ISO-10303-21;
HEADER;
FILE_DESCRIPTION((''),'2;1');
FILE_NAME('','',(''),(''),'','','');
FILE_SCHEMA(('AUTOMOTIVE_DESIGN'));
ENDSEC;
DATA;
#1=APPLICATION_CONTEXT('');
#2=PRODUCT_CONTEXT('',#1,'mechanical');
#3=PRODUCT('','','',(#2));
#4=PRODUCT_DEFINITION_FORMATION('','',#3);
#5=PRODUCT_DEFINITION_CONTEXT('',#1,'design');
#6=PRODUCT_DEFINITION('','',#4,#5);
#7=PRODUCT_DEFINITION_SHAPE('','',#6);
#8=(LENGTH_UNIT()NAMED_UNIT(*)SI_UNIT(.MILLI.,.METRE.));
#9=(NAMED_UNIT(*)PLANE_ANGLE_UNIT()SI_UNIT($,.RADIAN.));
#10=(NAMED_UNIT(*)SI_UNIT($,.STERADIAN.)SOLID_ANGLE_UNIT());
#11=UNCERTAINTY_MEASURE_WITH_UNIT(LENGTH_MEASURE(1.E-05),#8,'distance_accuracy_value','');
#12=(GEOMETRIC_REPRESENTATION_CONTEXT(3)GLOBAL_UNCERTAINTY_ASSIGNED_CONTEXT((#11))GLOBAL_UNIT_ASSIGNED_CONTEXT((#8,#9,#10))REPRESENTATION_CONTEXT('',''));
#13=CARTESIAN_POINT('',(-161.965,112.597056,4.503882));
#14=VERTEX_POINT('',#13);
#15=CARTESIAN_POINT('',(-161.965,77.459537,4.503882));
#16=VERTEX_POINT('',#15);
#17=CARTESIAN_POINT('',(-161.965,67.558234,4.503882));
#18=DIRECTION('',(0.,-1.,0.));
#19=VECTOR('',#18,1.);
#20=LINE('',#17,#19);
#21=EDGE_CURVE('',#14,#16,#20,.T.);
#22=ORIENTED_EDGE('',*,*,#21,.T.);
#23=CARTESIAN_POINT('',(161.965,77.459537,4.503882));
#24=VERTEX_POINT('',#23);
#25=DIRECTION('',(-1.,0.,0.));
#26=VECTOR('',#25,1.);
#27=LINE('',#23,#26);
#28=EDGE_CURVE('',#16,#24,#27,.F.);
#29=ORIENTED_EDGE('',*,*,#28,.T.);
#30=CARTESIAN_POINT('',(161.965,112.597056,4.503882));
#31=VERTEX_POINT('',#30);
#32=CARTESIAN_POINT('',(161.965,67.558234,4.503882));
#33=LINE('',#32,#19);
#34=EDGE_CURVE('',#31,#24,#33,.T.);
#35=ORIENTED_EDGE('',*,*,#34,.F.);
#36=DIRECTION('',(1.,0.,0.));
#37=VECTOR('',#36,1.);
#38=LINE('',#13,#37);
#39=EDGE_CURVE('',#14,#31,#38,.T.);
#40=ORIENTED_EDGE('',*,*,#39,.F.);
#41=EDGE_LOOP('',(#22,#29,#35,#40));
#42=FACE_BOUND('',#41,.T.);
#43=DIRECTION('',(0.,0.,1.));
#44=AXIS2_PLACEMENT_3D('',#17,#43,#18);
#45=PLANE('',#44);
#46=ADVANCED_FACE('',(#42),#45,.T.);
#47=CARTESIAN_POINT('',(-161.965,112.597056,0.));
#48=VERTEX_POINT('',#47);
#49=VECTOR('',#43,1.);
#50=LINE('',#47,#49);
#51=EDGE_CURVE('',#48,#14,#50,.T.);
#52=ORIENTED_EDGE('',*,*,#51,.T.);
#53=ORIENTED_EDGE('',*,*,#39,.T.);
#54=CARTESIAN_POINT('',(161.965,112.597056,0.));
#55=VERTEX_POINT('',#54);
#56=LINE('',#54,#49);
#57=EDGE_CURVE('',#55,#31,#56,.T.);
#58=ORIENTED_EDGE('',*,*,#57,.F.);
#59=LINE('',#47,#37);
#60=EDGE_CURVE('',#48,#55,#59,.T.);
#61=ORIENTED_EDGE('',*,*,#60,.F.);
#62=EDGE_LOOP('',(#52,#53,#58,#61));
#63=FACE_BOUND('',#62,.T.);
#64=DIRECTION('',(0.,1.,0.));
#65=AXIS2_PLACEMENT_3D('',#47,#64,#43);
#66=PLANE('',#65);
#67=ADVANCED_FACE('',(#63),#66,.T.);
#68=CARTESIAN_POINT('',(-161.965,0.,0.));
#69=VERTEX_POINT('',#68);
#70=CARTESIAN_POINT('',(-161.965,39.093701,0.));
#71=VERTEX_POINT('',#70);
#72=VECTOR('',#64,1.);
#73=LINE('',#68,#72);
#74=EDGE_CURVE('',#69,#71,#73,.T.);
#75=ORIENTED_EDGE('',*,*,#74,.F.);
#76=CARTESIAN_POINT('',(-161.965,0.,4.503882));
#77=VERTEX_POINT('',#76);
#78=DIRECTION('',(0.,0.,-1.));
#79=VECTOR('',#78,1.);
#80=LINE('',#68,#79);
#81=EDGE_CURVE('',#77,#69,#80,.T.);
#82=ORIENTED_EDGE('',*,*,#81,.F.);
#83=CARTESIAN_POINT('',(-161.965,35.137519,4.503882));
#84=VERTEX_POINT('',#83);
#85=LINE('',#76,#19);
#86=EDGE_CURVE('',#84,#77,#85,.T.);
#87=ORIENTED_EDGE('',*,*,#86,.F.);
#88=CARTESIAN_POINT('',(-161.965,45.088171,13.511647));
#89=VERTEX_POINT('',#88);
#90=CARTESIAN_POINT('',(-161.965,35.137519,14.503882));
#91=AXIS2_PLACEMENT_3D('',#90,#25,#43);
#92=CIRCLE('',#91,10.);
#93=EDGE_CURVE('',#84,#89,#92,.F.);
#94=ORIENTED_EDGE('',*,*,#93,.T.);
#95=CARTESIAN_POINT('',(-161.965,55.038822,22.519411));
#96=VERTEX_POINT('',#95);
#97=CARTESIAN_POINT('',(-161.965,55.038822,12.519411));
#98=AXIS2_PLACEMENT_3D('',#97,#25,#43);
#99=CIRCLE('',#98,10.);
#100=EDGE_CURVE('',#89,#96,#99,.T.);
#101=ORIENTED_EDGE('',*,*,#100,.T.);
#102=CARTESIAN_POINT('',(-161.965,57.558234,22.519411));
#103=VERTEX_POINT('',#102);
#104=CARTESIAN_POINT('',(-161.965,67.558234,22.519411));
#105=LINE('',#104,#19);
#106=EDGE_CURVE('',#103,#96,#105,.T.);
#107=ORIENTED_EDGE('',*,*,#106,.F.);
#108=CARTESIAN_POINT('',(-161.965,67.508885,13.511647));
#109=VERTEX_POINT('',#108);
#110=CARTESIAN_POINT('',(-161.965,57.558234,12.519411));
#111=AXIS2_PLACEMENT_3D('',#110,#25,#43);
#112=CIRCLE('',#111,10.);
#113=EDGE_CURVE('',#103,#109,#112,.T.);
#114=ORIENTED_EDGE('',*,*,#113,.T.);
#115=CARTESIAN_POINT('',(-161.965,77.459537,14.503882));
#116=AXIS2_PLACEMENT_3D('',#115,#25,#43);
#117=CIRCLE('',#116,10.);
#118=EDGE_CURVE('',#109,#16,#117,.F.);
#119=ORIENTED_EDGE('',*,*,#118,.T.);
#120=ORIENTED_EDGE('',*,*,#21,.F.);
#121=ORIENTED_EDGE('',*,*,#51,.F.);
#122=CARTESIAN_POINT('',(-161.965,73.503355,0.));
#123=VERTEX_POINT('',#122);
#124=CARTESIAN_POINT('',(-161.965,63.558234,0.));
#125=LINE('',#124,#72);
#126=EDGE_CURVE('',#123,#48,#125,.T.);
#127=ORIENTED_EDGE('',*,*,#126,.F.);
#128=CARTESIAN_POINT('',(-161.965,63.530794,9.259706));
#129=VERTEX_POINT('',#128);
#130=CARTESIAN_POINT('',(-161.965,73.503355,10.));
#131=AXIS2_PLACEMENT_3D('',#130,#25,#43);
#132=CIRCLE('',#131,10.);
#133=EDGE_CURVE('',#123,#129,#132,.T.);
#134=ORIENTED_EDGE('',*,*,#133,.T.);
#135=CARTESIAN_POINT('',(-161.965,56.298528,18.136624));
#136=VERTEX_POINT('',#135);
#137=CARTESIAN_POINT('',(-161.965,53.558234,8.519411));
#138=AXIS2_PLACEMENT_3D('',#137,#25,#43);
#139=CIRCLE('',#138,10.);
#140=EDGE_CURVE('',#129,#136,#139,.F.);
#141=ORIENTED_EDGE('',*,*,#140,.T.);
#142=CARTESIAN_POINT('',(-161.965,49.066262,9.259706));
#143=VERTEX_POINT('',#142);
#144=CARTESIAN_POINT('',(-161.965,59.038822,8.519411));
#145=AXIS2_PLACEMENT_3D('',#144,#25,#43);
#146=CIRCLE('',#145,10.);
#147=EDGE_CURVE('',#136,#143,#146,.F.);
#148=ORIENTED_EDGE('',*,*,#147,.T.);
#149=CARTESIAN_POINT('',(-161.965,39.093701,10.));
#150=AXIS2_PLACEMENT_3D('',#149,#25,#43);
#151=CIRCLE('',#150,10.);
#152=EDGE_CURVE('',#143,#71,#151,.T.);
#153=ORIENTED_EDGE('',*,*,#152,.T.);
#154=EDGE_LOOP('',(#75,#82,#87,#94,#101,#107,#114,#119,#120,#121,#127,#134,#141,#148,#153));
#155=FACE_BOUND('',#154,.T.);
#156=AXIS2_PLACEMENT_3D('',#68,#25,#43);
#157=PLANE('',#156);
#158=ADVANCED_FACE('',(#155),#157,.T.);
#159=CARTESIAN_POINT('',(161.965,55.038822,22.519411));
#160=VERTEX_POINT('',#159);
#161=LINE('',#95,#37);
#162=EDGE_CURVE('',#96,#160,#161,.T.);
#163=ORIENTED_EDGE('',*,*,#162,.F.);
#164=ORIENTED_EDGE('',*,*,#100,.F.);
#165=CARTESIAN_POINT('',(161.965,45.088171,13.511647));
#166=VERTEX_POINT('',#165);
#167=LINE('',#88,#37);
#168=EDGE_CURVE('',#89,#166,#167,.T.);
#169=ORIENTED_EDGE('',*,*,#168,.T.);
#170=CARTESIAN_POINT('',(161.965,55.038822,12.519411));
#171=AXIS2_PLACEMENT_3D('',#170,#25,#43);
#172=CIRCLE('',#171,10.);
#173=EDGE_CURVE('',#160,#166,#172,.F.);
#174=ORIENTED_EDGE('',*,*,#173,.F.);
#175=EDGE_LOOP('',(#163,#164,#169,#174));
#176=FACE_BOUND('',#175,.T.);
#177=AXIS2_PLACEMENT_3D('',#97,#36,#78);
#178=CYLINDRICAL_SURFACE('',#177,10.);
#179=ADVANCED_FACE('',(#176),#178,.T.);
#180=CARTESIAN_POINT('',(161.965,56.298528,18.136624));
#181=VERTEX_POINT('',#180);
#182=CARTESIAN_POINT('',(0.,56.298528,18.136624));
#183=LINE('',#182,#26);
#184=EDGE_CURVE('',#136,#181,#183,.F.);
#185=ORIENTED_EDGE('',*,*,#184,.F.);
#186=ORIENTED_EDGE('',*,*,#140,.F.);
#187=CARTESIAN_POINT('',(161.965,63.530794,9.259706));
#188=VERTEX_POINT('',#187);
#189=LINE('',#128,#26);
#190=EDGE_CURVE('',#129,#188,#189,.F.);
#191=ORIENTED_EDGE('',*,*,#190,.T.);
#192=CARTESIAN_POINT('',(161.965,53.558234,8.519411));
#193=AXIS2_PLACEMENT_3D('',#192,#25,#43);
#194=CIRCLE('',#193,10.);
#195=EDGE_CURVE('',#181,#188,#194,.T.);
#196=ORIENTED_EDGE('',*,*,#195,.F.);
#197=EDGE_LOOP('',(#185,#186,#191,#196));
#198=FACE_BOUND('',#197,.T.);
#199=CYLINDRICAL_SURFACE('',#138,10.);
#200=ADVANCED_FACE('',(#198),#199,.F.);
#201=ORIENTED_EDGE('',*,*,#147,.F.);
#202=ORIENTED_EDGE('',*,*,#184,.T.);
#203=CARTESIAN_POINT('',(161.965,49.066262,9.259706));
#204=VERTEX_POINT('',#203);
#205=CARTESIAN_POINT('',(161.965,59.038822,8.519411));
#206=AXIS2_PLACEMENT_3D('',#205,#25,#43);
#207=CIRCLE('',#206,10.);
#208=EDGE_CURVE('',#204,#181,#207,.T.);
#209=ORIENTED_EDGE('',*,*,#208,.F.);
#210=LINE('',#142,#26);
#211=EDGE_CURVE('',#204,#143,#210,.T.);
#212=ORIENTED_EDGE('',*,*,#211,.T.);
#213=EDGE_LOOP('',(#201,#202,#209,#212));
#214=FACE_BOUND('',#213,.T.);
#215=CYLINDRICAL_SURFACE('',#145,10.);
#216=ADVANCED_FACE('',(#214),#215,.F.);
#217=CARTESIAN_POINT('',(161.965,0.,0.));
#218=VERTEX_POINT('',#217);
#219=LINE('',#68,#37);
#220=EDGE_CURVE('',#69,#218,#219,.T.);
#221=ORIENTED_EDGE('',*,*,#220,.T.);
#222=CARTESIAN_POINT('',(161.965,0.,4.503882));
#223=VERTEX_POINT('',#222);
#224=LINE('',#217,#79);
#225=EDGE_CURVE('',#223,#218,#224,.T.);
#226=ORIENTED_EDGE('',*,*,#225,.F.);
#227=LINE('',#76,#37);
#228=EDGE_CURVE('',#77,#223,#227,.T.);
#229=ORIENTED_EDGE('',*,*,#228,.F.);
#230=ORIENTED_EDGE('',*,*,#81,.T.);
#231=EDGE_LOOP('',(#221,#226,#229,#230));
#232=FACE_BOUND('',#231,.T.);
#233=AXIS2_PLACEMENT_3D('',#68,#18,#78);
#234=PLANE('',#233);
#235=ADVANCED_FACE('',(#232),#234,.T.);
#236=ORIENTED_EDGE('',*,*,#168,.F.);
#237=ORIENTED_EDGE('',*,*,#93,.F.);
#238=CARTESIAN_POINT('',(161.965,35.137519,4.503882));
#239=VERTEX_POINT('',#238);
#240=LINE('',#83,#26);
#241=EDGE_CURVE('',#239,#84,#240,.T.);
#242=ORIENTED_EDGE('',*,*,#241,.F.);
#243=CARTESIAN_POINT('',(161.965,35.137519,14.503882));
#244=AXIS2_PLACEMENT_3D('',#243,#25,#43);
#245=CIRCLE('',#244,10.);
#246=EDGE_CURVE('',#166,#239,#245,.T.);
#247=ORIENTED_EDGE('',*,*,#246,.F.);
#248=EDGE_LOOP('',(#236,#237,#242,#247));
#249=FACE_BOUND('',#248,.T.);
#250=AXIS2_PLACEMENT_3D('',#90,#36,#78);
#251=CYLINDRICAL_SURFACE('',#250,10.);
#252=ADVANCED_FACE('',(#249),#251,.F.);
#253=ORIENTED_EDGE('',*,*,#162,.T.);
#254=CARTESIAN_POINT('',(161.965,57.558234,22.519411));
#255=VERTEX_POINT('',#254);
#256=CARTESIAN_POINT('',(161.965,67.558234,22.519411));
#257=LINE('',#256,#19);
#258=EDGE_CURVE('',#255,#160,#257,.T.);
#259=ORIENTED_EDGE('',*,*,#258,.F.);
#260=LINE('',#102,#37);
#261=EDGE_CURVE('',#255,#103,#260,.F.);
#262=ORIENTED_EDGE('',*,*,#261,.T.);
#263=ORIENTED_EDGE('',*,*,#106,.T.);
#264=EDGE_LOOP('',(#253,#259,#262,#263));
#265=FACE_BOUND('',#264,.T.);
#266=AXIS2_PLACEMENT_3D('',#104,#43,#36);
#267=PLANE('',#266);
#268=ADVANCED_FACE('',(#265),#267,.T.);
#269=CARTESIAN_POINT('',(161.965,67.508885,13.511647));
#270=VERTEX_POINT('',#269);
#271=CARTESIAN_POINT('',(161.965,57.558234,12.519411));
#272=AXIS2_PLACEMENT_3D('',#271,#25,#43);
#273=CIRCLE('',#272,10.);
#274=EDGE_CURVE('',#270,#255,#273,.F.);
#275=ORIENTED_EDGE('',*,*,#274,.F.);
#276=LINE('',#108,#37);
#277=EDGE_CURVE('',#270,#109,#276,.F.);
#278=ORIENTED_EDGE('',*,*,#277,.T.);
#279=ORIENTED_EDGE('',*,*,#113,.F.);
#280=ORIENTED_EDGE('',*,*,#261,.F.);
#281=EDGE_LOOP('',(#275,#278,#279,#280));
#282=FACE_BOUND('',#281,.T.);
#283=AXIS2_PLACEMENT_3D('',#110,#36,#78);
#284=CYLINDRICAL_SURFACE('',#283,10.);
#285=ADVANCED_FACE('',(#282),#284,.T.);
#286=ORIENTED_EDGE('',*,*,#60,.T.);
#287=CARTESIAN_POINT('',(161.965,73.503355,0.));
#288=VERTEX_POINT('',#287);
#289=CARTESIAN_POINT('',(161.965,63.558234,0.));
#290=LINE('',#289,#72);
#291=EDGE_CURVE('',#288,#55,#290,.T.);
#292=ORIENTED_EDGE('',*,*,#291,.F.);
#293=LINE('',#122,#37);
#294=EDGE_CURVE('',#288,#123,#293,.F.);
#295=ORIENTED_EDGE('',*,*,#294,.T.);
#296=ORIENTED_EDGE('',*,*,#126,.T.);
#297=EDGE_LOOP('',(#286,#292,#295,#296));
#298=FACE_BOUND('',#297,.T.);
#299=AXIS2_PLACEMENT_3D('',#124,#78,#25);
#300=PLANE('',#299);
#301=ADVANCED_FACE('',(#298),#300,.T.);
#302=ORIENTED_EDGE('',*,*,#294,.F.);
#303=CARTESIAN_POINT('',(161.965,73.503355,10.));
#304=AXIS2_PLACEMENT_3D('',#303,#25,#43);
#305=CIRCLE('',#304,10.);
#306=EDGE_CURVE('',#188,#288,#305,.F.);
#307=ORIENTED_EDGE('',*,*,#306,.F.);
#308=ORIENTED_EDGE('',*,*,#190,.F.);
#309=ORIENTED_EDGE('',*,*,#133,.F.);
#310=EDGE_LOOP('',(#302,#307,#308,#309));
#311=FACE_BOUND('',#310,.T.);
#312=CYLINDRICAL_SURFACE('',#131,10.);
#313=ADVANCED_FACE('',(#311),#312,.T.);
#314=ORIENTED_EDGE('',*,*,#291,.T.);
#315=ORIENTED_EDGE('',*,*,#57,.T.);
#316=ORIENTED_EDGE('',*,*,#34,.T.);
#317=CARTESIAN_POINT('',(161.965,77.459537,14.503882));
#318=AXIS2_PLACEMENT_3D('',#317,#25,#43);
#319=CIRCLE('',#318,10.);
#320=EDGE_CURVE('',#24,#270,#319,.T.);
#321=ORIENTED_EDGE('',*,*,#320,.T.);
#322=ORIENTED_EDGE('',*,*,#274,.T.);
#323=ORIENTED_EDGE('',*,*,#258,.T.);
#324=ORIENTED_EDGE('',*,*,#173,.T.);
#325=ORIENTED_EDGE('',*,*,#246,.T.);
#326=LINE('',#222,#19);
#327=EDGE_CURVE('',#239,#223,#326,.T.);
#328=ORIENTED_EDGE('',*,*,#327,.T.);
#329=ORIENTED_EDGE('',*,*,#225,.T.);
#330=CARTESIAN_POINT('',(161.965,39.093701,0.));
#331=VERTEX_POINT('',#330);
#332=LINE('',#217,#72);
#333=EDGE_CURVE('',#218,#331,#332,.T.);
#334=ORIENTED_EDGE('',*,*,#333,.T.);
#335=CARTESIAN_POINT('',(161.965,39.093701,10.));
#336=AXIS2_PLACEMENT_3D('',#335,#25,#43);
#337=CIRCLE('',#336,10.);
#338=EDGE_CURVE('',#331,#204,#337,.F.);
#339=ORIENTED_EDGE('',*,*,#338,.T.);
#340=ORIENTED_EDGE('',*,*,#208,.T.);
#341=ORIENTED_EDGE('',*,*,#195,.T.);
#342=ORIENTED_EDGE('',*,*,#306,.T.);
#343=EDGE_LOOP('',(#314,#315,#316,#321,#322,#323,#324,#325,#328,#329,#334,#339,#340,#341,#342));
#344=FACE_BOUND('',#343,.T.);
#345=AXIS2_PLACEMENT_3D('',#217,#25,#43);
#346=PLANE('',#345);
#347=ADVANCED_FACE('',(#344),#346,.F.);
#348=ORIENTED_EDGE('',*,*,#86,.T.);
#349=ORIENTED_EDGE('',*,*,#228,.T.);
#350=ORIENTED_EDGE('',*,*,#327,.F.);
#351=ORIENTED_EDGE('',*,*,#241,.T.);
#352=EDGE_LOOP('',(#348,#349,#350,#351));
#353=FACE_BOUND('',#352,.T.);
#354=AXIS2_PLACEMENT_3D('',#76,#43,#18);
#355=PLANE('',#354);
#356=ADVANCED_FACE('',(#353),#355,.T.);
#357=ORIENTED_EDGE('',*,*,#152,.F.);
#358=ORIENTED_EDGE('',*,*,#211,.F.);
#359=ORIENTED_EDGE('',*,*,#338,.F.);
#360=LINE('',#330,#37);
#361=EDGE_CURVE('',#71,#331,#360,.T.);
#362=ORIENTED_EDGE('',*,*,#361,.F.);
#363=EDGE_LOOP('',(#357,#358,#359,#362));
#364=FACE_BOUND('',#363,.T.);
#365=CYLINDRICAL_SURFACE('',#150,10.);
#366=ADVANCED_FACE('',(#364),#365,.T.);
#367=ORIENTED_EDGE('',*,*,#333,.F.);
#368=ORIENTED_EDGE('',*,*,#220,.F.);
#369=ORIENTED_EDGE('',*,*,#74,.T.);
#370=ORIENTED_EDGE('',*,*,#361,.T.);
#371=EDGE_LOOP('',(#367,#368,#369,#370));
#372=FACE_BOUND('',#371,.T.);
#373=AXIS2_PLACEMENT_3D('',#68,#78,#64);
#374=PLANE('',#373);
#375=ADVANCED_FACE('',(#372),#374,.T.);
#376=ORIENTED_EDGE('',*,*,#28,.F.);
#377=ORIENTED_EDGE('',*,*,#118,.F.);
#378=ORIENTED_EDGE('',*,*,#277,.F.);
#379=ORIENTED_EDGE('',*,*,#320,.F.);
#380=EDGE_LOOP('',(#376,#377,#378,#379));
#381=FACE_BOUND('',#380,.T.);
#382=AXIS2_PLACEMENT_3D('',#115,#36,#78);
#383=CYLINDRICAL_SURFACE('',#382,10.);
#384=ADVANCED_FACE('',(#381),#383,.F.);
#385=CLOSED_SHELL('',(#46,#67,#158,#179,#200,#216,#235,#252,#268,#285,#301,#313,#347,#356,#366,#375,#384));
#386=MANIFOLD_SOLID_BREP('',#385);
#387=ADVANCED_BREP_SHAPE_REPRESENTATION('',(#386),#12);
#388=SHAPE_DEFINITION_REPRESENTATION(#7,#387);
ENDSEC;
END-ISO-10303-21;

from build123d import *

# Parameters (mm, degrees)
SM_START               = -161.965
SM_BASE_FLANGE_1_DEPTH = 323.93
FILLET_3_R             = 10
FILLET_4_R             = 10
FILLET_5_R             = 10
FILLET_6_R             = 10
FILLET_7_R             = 10


# Read off the part's stored shape, not the designer's step: 基体-法兰1
with BuildPart() as part:
    # 基体-法兰1 outline → 基体-法兰1 (new body)
    with BuildSketch(Plane(origin=(0, 0, 0), x_dir=(0, 0, -1), z_dir=(1, 0, 0)).offset(SM_START)):
        Polygon((-4.503882243, 0), (0, 0), (0, 49.038822429), (-18.519411214, 49.038822429), (-18.519411214, 63.558233643), (0, 63.558233643), (0, 112.597056072), (-4.503882243, 112.597056072), (-4.503882243, 67.558233643), (-22.519411214, 67.558233643), (-22.519411214, 45.038822429), (-4.503882243, 45.038822429), align=None)
    extrude(amount=SM_BASE_FLANGE_1_DEPTH)

    # 圆角3
    fillet_3_edges = [part.edges().sort_by_distance(p)[0] for p in [
        (0, 45.038822429, 22.519411214),
        (0, 67.558233643, 22.519411214),
    ]]
    fillet(fillet_3_edges, radius=FILLET_3_R)

    # 圆角4
    # the kernel refuses this fillet: 10 mm, written as the material it adds along each edge
    with BuildSketch(Plane(origin=(-161.965, 49.038822429, 18.519411214), x_dir=(0, 1, 0), z_dir=(1, 0, 0)), Plane(origin=(-161.965, 63.558233643, 18.519411214), x_dir=(0, 0, -1), z_dir=(1, 0, 0))) as fillet_4_piece_1:
        with BuildLine():
            CenterArc((FILLET_4_R, -FILLET_4_R), FILLET_4_R, 90, 90)
            Line((0, -FILLET_4_R), (0, 0))
            Line((0, 0), (FILLET_4_R, 0))
        make_face()
    extrude(amount=323.93)

    # 圆角5
    fillet_5_edges = [part.edges().sort_by_distance(p)[0] for p in [
        (0, 63.558233643, 0),
        (0, 49.038822429, 0),
    ]]
    fillet(fillet_5_edges, radius=FILLET_5_R)

    # 圆角6
    fillet_6_edges = [part.edges().sort_by_distance(p)[0] for p in [
        (0, 45.038822429, 4.503882243),
    ]]
    fillet(fillet_6_edges, radius=FILLET_6_R)

    # 圆角7
    fillet_7_edges = [part.edges().sort_by_distance(p)[0] for p in [
        (0, 67.558233643, 4.503882243),
    ]]
    fillet(fillet_7_edges, radius=FILLET_7_R)


solid = part.part
